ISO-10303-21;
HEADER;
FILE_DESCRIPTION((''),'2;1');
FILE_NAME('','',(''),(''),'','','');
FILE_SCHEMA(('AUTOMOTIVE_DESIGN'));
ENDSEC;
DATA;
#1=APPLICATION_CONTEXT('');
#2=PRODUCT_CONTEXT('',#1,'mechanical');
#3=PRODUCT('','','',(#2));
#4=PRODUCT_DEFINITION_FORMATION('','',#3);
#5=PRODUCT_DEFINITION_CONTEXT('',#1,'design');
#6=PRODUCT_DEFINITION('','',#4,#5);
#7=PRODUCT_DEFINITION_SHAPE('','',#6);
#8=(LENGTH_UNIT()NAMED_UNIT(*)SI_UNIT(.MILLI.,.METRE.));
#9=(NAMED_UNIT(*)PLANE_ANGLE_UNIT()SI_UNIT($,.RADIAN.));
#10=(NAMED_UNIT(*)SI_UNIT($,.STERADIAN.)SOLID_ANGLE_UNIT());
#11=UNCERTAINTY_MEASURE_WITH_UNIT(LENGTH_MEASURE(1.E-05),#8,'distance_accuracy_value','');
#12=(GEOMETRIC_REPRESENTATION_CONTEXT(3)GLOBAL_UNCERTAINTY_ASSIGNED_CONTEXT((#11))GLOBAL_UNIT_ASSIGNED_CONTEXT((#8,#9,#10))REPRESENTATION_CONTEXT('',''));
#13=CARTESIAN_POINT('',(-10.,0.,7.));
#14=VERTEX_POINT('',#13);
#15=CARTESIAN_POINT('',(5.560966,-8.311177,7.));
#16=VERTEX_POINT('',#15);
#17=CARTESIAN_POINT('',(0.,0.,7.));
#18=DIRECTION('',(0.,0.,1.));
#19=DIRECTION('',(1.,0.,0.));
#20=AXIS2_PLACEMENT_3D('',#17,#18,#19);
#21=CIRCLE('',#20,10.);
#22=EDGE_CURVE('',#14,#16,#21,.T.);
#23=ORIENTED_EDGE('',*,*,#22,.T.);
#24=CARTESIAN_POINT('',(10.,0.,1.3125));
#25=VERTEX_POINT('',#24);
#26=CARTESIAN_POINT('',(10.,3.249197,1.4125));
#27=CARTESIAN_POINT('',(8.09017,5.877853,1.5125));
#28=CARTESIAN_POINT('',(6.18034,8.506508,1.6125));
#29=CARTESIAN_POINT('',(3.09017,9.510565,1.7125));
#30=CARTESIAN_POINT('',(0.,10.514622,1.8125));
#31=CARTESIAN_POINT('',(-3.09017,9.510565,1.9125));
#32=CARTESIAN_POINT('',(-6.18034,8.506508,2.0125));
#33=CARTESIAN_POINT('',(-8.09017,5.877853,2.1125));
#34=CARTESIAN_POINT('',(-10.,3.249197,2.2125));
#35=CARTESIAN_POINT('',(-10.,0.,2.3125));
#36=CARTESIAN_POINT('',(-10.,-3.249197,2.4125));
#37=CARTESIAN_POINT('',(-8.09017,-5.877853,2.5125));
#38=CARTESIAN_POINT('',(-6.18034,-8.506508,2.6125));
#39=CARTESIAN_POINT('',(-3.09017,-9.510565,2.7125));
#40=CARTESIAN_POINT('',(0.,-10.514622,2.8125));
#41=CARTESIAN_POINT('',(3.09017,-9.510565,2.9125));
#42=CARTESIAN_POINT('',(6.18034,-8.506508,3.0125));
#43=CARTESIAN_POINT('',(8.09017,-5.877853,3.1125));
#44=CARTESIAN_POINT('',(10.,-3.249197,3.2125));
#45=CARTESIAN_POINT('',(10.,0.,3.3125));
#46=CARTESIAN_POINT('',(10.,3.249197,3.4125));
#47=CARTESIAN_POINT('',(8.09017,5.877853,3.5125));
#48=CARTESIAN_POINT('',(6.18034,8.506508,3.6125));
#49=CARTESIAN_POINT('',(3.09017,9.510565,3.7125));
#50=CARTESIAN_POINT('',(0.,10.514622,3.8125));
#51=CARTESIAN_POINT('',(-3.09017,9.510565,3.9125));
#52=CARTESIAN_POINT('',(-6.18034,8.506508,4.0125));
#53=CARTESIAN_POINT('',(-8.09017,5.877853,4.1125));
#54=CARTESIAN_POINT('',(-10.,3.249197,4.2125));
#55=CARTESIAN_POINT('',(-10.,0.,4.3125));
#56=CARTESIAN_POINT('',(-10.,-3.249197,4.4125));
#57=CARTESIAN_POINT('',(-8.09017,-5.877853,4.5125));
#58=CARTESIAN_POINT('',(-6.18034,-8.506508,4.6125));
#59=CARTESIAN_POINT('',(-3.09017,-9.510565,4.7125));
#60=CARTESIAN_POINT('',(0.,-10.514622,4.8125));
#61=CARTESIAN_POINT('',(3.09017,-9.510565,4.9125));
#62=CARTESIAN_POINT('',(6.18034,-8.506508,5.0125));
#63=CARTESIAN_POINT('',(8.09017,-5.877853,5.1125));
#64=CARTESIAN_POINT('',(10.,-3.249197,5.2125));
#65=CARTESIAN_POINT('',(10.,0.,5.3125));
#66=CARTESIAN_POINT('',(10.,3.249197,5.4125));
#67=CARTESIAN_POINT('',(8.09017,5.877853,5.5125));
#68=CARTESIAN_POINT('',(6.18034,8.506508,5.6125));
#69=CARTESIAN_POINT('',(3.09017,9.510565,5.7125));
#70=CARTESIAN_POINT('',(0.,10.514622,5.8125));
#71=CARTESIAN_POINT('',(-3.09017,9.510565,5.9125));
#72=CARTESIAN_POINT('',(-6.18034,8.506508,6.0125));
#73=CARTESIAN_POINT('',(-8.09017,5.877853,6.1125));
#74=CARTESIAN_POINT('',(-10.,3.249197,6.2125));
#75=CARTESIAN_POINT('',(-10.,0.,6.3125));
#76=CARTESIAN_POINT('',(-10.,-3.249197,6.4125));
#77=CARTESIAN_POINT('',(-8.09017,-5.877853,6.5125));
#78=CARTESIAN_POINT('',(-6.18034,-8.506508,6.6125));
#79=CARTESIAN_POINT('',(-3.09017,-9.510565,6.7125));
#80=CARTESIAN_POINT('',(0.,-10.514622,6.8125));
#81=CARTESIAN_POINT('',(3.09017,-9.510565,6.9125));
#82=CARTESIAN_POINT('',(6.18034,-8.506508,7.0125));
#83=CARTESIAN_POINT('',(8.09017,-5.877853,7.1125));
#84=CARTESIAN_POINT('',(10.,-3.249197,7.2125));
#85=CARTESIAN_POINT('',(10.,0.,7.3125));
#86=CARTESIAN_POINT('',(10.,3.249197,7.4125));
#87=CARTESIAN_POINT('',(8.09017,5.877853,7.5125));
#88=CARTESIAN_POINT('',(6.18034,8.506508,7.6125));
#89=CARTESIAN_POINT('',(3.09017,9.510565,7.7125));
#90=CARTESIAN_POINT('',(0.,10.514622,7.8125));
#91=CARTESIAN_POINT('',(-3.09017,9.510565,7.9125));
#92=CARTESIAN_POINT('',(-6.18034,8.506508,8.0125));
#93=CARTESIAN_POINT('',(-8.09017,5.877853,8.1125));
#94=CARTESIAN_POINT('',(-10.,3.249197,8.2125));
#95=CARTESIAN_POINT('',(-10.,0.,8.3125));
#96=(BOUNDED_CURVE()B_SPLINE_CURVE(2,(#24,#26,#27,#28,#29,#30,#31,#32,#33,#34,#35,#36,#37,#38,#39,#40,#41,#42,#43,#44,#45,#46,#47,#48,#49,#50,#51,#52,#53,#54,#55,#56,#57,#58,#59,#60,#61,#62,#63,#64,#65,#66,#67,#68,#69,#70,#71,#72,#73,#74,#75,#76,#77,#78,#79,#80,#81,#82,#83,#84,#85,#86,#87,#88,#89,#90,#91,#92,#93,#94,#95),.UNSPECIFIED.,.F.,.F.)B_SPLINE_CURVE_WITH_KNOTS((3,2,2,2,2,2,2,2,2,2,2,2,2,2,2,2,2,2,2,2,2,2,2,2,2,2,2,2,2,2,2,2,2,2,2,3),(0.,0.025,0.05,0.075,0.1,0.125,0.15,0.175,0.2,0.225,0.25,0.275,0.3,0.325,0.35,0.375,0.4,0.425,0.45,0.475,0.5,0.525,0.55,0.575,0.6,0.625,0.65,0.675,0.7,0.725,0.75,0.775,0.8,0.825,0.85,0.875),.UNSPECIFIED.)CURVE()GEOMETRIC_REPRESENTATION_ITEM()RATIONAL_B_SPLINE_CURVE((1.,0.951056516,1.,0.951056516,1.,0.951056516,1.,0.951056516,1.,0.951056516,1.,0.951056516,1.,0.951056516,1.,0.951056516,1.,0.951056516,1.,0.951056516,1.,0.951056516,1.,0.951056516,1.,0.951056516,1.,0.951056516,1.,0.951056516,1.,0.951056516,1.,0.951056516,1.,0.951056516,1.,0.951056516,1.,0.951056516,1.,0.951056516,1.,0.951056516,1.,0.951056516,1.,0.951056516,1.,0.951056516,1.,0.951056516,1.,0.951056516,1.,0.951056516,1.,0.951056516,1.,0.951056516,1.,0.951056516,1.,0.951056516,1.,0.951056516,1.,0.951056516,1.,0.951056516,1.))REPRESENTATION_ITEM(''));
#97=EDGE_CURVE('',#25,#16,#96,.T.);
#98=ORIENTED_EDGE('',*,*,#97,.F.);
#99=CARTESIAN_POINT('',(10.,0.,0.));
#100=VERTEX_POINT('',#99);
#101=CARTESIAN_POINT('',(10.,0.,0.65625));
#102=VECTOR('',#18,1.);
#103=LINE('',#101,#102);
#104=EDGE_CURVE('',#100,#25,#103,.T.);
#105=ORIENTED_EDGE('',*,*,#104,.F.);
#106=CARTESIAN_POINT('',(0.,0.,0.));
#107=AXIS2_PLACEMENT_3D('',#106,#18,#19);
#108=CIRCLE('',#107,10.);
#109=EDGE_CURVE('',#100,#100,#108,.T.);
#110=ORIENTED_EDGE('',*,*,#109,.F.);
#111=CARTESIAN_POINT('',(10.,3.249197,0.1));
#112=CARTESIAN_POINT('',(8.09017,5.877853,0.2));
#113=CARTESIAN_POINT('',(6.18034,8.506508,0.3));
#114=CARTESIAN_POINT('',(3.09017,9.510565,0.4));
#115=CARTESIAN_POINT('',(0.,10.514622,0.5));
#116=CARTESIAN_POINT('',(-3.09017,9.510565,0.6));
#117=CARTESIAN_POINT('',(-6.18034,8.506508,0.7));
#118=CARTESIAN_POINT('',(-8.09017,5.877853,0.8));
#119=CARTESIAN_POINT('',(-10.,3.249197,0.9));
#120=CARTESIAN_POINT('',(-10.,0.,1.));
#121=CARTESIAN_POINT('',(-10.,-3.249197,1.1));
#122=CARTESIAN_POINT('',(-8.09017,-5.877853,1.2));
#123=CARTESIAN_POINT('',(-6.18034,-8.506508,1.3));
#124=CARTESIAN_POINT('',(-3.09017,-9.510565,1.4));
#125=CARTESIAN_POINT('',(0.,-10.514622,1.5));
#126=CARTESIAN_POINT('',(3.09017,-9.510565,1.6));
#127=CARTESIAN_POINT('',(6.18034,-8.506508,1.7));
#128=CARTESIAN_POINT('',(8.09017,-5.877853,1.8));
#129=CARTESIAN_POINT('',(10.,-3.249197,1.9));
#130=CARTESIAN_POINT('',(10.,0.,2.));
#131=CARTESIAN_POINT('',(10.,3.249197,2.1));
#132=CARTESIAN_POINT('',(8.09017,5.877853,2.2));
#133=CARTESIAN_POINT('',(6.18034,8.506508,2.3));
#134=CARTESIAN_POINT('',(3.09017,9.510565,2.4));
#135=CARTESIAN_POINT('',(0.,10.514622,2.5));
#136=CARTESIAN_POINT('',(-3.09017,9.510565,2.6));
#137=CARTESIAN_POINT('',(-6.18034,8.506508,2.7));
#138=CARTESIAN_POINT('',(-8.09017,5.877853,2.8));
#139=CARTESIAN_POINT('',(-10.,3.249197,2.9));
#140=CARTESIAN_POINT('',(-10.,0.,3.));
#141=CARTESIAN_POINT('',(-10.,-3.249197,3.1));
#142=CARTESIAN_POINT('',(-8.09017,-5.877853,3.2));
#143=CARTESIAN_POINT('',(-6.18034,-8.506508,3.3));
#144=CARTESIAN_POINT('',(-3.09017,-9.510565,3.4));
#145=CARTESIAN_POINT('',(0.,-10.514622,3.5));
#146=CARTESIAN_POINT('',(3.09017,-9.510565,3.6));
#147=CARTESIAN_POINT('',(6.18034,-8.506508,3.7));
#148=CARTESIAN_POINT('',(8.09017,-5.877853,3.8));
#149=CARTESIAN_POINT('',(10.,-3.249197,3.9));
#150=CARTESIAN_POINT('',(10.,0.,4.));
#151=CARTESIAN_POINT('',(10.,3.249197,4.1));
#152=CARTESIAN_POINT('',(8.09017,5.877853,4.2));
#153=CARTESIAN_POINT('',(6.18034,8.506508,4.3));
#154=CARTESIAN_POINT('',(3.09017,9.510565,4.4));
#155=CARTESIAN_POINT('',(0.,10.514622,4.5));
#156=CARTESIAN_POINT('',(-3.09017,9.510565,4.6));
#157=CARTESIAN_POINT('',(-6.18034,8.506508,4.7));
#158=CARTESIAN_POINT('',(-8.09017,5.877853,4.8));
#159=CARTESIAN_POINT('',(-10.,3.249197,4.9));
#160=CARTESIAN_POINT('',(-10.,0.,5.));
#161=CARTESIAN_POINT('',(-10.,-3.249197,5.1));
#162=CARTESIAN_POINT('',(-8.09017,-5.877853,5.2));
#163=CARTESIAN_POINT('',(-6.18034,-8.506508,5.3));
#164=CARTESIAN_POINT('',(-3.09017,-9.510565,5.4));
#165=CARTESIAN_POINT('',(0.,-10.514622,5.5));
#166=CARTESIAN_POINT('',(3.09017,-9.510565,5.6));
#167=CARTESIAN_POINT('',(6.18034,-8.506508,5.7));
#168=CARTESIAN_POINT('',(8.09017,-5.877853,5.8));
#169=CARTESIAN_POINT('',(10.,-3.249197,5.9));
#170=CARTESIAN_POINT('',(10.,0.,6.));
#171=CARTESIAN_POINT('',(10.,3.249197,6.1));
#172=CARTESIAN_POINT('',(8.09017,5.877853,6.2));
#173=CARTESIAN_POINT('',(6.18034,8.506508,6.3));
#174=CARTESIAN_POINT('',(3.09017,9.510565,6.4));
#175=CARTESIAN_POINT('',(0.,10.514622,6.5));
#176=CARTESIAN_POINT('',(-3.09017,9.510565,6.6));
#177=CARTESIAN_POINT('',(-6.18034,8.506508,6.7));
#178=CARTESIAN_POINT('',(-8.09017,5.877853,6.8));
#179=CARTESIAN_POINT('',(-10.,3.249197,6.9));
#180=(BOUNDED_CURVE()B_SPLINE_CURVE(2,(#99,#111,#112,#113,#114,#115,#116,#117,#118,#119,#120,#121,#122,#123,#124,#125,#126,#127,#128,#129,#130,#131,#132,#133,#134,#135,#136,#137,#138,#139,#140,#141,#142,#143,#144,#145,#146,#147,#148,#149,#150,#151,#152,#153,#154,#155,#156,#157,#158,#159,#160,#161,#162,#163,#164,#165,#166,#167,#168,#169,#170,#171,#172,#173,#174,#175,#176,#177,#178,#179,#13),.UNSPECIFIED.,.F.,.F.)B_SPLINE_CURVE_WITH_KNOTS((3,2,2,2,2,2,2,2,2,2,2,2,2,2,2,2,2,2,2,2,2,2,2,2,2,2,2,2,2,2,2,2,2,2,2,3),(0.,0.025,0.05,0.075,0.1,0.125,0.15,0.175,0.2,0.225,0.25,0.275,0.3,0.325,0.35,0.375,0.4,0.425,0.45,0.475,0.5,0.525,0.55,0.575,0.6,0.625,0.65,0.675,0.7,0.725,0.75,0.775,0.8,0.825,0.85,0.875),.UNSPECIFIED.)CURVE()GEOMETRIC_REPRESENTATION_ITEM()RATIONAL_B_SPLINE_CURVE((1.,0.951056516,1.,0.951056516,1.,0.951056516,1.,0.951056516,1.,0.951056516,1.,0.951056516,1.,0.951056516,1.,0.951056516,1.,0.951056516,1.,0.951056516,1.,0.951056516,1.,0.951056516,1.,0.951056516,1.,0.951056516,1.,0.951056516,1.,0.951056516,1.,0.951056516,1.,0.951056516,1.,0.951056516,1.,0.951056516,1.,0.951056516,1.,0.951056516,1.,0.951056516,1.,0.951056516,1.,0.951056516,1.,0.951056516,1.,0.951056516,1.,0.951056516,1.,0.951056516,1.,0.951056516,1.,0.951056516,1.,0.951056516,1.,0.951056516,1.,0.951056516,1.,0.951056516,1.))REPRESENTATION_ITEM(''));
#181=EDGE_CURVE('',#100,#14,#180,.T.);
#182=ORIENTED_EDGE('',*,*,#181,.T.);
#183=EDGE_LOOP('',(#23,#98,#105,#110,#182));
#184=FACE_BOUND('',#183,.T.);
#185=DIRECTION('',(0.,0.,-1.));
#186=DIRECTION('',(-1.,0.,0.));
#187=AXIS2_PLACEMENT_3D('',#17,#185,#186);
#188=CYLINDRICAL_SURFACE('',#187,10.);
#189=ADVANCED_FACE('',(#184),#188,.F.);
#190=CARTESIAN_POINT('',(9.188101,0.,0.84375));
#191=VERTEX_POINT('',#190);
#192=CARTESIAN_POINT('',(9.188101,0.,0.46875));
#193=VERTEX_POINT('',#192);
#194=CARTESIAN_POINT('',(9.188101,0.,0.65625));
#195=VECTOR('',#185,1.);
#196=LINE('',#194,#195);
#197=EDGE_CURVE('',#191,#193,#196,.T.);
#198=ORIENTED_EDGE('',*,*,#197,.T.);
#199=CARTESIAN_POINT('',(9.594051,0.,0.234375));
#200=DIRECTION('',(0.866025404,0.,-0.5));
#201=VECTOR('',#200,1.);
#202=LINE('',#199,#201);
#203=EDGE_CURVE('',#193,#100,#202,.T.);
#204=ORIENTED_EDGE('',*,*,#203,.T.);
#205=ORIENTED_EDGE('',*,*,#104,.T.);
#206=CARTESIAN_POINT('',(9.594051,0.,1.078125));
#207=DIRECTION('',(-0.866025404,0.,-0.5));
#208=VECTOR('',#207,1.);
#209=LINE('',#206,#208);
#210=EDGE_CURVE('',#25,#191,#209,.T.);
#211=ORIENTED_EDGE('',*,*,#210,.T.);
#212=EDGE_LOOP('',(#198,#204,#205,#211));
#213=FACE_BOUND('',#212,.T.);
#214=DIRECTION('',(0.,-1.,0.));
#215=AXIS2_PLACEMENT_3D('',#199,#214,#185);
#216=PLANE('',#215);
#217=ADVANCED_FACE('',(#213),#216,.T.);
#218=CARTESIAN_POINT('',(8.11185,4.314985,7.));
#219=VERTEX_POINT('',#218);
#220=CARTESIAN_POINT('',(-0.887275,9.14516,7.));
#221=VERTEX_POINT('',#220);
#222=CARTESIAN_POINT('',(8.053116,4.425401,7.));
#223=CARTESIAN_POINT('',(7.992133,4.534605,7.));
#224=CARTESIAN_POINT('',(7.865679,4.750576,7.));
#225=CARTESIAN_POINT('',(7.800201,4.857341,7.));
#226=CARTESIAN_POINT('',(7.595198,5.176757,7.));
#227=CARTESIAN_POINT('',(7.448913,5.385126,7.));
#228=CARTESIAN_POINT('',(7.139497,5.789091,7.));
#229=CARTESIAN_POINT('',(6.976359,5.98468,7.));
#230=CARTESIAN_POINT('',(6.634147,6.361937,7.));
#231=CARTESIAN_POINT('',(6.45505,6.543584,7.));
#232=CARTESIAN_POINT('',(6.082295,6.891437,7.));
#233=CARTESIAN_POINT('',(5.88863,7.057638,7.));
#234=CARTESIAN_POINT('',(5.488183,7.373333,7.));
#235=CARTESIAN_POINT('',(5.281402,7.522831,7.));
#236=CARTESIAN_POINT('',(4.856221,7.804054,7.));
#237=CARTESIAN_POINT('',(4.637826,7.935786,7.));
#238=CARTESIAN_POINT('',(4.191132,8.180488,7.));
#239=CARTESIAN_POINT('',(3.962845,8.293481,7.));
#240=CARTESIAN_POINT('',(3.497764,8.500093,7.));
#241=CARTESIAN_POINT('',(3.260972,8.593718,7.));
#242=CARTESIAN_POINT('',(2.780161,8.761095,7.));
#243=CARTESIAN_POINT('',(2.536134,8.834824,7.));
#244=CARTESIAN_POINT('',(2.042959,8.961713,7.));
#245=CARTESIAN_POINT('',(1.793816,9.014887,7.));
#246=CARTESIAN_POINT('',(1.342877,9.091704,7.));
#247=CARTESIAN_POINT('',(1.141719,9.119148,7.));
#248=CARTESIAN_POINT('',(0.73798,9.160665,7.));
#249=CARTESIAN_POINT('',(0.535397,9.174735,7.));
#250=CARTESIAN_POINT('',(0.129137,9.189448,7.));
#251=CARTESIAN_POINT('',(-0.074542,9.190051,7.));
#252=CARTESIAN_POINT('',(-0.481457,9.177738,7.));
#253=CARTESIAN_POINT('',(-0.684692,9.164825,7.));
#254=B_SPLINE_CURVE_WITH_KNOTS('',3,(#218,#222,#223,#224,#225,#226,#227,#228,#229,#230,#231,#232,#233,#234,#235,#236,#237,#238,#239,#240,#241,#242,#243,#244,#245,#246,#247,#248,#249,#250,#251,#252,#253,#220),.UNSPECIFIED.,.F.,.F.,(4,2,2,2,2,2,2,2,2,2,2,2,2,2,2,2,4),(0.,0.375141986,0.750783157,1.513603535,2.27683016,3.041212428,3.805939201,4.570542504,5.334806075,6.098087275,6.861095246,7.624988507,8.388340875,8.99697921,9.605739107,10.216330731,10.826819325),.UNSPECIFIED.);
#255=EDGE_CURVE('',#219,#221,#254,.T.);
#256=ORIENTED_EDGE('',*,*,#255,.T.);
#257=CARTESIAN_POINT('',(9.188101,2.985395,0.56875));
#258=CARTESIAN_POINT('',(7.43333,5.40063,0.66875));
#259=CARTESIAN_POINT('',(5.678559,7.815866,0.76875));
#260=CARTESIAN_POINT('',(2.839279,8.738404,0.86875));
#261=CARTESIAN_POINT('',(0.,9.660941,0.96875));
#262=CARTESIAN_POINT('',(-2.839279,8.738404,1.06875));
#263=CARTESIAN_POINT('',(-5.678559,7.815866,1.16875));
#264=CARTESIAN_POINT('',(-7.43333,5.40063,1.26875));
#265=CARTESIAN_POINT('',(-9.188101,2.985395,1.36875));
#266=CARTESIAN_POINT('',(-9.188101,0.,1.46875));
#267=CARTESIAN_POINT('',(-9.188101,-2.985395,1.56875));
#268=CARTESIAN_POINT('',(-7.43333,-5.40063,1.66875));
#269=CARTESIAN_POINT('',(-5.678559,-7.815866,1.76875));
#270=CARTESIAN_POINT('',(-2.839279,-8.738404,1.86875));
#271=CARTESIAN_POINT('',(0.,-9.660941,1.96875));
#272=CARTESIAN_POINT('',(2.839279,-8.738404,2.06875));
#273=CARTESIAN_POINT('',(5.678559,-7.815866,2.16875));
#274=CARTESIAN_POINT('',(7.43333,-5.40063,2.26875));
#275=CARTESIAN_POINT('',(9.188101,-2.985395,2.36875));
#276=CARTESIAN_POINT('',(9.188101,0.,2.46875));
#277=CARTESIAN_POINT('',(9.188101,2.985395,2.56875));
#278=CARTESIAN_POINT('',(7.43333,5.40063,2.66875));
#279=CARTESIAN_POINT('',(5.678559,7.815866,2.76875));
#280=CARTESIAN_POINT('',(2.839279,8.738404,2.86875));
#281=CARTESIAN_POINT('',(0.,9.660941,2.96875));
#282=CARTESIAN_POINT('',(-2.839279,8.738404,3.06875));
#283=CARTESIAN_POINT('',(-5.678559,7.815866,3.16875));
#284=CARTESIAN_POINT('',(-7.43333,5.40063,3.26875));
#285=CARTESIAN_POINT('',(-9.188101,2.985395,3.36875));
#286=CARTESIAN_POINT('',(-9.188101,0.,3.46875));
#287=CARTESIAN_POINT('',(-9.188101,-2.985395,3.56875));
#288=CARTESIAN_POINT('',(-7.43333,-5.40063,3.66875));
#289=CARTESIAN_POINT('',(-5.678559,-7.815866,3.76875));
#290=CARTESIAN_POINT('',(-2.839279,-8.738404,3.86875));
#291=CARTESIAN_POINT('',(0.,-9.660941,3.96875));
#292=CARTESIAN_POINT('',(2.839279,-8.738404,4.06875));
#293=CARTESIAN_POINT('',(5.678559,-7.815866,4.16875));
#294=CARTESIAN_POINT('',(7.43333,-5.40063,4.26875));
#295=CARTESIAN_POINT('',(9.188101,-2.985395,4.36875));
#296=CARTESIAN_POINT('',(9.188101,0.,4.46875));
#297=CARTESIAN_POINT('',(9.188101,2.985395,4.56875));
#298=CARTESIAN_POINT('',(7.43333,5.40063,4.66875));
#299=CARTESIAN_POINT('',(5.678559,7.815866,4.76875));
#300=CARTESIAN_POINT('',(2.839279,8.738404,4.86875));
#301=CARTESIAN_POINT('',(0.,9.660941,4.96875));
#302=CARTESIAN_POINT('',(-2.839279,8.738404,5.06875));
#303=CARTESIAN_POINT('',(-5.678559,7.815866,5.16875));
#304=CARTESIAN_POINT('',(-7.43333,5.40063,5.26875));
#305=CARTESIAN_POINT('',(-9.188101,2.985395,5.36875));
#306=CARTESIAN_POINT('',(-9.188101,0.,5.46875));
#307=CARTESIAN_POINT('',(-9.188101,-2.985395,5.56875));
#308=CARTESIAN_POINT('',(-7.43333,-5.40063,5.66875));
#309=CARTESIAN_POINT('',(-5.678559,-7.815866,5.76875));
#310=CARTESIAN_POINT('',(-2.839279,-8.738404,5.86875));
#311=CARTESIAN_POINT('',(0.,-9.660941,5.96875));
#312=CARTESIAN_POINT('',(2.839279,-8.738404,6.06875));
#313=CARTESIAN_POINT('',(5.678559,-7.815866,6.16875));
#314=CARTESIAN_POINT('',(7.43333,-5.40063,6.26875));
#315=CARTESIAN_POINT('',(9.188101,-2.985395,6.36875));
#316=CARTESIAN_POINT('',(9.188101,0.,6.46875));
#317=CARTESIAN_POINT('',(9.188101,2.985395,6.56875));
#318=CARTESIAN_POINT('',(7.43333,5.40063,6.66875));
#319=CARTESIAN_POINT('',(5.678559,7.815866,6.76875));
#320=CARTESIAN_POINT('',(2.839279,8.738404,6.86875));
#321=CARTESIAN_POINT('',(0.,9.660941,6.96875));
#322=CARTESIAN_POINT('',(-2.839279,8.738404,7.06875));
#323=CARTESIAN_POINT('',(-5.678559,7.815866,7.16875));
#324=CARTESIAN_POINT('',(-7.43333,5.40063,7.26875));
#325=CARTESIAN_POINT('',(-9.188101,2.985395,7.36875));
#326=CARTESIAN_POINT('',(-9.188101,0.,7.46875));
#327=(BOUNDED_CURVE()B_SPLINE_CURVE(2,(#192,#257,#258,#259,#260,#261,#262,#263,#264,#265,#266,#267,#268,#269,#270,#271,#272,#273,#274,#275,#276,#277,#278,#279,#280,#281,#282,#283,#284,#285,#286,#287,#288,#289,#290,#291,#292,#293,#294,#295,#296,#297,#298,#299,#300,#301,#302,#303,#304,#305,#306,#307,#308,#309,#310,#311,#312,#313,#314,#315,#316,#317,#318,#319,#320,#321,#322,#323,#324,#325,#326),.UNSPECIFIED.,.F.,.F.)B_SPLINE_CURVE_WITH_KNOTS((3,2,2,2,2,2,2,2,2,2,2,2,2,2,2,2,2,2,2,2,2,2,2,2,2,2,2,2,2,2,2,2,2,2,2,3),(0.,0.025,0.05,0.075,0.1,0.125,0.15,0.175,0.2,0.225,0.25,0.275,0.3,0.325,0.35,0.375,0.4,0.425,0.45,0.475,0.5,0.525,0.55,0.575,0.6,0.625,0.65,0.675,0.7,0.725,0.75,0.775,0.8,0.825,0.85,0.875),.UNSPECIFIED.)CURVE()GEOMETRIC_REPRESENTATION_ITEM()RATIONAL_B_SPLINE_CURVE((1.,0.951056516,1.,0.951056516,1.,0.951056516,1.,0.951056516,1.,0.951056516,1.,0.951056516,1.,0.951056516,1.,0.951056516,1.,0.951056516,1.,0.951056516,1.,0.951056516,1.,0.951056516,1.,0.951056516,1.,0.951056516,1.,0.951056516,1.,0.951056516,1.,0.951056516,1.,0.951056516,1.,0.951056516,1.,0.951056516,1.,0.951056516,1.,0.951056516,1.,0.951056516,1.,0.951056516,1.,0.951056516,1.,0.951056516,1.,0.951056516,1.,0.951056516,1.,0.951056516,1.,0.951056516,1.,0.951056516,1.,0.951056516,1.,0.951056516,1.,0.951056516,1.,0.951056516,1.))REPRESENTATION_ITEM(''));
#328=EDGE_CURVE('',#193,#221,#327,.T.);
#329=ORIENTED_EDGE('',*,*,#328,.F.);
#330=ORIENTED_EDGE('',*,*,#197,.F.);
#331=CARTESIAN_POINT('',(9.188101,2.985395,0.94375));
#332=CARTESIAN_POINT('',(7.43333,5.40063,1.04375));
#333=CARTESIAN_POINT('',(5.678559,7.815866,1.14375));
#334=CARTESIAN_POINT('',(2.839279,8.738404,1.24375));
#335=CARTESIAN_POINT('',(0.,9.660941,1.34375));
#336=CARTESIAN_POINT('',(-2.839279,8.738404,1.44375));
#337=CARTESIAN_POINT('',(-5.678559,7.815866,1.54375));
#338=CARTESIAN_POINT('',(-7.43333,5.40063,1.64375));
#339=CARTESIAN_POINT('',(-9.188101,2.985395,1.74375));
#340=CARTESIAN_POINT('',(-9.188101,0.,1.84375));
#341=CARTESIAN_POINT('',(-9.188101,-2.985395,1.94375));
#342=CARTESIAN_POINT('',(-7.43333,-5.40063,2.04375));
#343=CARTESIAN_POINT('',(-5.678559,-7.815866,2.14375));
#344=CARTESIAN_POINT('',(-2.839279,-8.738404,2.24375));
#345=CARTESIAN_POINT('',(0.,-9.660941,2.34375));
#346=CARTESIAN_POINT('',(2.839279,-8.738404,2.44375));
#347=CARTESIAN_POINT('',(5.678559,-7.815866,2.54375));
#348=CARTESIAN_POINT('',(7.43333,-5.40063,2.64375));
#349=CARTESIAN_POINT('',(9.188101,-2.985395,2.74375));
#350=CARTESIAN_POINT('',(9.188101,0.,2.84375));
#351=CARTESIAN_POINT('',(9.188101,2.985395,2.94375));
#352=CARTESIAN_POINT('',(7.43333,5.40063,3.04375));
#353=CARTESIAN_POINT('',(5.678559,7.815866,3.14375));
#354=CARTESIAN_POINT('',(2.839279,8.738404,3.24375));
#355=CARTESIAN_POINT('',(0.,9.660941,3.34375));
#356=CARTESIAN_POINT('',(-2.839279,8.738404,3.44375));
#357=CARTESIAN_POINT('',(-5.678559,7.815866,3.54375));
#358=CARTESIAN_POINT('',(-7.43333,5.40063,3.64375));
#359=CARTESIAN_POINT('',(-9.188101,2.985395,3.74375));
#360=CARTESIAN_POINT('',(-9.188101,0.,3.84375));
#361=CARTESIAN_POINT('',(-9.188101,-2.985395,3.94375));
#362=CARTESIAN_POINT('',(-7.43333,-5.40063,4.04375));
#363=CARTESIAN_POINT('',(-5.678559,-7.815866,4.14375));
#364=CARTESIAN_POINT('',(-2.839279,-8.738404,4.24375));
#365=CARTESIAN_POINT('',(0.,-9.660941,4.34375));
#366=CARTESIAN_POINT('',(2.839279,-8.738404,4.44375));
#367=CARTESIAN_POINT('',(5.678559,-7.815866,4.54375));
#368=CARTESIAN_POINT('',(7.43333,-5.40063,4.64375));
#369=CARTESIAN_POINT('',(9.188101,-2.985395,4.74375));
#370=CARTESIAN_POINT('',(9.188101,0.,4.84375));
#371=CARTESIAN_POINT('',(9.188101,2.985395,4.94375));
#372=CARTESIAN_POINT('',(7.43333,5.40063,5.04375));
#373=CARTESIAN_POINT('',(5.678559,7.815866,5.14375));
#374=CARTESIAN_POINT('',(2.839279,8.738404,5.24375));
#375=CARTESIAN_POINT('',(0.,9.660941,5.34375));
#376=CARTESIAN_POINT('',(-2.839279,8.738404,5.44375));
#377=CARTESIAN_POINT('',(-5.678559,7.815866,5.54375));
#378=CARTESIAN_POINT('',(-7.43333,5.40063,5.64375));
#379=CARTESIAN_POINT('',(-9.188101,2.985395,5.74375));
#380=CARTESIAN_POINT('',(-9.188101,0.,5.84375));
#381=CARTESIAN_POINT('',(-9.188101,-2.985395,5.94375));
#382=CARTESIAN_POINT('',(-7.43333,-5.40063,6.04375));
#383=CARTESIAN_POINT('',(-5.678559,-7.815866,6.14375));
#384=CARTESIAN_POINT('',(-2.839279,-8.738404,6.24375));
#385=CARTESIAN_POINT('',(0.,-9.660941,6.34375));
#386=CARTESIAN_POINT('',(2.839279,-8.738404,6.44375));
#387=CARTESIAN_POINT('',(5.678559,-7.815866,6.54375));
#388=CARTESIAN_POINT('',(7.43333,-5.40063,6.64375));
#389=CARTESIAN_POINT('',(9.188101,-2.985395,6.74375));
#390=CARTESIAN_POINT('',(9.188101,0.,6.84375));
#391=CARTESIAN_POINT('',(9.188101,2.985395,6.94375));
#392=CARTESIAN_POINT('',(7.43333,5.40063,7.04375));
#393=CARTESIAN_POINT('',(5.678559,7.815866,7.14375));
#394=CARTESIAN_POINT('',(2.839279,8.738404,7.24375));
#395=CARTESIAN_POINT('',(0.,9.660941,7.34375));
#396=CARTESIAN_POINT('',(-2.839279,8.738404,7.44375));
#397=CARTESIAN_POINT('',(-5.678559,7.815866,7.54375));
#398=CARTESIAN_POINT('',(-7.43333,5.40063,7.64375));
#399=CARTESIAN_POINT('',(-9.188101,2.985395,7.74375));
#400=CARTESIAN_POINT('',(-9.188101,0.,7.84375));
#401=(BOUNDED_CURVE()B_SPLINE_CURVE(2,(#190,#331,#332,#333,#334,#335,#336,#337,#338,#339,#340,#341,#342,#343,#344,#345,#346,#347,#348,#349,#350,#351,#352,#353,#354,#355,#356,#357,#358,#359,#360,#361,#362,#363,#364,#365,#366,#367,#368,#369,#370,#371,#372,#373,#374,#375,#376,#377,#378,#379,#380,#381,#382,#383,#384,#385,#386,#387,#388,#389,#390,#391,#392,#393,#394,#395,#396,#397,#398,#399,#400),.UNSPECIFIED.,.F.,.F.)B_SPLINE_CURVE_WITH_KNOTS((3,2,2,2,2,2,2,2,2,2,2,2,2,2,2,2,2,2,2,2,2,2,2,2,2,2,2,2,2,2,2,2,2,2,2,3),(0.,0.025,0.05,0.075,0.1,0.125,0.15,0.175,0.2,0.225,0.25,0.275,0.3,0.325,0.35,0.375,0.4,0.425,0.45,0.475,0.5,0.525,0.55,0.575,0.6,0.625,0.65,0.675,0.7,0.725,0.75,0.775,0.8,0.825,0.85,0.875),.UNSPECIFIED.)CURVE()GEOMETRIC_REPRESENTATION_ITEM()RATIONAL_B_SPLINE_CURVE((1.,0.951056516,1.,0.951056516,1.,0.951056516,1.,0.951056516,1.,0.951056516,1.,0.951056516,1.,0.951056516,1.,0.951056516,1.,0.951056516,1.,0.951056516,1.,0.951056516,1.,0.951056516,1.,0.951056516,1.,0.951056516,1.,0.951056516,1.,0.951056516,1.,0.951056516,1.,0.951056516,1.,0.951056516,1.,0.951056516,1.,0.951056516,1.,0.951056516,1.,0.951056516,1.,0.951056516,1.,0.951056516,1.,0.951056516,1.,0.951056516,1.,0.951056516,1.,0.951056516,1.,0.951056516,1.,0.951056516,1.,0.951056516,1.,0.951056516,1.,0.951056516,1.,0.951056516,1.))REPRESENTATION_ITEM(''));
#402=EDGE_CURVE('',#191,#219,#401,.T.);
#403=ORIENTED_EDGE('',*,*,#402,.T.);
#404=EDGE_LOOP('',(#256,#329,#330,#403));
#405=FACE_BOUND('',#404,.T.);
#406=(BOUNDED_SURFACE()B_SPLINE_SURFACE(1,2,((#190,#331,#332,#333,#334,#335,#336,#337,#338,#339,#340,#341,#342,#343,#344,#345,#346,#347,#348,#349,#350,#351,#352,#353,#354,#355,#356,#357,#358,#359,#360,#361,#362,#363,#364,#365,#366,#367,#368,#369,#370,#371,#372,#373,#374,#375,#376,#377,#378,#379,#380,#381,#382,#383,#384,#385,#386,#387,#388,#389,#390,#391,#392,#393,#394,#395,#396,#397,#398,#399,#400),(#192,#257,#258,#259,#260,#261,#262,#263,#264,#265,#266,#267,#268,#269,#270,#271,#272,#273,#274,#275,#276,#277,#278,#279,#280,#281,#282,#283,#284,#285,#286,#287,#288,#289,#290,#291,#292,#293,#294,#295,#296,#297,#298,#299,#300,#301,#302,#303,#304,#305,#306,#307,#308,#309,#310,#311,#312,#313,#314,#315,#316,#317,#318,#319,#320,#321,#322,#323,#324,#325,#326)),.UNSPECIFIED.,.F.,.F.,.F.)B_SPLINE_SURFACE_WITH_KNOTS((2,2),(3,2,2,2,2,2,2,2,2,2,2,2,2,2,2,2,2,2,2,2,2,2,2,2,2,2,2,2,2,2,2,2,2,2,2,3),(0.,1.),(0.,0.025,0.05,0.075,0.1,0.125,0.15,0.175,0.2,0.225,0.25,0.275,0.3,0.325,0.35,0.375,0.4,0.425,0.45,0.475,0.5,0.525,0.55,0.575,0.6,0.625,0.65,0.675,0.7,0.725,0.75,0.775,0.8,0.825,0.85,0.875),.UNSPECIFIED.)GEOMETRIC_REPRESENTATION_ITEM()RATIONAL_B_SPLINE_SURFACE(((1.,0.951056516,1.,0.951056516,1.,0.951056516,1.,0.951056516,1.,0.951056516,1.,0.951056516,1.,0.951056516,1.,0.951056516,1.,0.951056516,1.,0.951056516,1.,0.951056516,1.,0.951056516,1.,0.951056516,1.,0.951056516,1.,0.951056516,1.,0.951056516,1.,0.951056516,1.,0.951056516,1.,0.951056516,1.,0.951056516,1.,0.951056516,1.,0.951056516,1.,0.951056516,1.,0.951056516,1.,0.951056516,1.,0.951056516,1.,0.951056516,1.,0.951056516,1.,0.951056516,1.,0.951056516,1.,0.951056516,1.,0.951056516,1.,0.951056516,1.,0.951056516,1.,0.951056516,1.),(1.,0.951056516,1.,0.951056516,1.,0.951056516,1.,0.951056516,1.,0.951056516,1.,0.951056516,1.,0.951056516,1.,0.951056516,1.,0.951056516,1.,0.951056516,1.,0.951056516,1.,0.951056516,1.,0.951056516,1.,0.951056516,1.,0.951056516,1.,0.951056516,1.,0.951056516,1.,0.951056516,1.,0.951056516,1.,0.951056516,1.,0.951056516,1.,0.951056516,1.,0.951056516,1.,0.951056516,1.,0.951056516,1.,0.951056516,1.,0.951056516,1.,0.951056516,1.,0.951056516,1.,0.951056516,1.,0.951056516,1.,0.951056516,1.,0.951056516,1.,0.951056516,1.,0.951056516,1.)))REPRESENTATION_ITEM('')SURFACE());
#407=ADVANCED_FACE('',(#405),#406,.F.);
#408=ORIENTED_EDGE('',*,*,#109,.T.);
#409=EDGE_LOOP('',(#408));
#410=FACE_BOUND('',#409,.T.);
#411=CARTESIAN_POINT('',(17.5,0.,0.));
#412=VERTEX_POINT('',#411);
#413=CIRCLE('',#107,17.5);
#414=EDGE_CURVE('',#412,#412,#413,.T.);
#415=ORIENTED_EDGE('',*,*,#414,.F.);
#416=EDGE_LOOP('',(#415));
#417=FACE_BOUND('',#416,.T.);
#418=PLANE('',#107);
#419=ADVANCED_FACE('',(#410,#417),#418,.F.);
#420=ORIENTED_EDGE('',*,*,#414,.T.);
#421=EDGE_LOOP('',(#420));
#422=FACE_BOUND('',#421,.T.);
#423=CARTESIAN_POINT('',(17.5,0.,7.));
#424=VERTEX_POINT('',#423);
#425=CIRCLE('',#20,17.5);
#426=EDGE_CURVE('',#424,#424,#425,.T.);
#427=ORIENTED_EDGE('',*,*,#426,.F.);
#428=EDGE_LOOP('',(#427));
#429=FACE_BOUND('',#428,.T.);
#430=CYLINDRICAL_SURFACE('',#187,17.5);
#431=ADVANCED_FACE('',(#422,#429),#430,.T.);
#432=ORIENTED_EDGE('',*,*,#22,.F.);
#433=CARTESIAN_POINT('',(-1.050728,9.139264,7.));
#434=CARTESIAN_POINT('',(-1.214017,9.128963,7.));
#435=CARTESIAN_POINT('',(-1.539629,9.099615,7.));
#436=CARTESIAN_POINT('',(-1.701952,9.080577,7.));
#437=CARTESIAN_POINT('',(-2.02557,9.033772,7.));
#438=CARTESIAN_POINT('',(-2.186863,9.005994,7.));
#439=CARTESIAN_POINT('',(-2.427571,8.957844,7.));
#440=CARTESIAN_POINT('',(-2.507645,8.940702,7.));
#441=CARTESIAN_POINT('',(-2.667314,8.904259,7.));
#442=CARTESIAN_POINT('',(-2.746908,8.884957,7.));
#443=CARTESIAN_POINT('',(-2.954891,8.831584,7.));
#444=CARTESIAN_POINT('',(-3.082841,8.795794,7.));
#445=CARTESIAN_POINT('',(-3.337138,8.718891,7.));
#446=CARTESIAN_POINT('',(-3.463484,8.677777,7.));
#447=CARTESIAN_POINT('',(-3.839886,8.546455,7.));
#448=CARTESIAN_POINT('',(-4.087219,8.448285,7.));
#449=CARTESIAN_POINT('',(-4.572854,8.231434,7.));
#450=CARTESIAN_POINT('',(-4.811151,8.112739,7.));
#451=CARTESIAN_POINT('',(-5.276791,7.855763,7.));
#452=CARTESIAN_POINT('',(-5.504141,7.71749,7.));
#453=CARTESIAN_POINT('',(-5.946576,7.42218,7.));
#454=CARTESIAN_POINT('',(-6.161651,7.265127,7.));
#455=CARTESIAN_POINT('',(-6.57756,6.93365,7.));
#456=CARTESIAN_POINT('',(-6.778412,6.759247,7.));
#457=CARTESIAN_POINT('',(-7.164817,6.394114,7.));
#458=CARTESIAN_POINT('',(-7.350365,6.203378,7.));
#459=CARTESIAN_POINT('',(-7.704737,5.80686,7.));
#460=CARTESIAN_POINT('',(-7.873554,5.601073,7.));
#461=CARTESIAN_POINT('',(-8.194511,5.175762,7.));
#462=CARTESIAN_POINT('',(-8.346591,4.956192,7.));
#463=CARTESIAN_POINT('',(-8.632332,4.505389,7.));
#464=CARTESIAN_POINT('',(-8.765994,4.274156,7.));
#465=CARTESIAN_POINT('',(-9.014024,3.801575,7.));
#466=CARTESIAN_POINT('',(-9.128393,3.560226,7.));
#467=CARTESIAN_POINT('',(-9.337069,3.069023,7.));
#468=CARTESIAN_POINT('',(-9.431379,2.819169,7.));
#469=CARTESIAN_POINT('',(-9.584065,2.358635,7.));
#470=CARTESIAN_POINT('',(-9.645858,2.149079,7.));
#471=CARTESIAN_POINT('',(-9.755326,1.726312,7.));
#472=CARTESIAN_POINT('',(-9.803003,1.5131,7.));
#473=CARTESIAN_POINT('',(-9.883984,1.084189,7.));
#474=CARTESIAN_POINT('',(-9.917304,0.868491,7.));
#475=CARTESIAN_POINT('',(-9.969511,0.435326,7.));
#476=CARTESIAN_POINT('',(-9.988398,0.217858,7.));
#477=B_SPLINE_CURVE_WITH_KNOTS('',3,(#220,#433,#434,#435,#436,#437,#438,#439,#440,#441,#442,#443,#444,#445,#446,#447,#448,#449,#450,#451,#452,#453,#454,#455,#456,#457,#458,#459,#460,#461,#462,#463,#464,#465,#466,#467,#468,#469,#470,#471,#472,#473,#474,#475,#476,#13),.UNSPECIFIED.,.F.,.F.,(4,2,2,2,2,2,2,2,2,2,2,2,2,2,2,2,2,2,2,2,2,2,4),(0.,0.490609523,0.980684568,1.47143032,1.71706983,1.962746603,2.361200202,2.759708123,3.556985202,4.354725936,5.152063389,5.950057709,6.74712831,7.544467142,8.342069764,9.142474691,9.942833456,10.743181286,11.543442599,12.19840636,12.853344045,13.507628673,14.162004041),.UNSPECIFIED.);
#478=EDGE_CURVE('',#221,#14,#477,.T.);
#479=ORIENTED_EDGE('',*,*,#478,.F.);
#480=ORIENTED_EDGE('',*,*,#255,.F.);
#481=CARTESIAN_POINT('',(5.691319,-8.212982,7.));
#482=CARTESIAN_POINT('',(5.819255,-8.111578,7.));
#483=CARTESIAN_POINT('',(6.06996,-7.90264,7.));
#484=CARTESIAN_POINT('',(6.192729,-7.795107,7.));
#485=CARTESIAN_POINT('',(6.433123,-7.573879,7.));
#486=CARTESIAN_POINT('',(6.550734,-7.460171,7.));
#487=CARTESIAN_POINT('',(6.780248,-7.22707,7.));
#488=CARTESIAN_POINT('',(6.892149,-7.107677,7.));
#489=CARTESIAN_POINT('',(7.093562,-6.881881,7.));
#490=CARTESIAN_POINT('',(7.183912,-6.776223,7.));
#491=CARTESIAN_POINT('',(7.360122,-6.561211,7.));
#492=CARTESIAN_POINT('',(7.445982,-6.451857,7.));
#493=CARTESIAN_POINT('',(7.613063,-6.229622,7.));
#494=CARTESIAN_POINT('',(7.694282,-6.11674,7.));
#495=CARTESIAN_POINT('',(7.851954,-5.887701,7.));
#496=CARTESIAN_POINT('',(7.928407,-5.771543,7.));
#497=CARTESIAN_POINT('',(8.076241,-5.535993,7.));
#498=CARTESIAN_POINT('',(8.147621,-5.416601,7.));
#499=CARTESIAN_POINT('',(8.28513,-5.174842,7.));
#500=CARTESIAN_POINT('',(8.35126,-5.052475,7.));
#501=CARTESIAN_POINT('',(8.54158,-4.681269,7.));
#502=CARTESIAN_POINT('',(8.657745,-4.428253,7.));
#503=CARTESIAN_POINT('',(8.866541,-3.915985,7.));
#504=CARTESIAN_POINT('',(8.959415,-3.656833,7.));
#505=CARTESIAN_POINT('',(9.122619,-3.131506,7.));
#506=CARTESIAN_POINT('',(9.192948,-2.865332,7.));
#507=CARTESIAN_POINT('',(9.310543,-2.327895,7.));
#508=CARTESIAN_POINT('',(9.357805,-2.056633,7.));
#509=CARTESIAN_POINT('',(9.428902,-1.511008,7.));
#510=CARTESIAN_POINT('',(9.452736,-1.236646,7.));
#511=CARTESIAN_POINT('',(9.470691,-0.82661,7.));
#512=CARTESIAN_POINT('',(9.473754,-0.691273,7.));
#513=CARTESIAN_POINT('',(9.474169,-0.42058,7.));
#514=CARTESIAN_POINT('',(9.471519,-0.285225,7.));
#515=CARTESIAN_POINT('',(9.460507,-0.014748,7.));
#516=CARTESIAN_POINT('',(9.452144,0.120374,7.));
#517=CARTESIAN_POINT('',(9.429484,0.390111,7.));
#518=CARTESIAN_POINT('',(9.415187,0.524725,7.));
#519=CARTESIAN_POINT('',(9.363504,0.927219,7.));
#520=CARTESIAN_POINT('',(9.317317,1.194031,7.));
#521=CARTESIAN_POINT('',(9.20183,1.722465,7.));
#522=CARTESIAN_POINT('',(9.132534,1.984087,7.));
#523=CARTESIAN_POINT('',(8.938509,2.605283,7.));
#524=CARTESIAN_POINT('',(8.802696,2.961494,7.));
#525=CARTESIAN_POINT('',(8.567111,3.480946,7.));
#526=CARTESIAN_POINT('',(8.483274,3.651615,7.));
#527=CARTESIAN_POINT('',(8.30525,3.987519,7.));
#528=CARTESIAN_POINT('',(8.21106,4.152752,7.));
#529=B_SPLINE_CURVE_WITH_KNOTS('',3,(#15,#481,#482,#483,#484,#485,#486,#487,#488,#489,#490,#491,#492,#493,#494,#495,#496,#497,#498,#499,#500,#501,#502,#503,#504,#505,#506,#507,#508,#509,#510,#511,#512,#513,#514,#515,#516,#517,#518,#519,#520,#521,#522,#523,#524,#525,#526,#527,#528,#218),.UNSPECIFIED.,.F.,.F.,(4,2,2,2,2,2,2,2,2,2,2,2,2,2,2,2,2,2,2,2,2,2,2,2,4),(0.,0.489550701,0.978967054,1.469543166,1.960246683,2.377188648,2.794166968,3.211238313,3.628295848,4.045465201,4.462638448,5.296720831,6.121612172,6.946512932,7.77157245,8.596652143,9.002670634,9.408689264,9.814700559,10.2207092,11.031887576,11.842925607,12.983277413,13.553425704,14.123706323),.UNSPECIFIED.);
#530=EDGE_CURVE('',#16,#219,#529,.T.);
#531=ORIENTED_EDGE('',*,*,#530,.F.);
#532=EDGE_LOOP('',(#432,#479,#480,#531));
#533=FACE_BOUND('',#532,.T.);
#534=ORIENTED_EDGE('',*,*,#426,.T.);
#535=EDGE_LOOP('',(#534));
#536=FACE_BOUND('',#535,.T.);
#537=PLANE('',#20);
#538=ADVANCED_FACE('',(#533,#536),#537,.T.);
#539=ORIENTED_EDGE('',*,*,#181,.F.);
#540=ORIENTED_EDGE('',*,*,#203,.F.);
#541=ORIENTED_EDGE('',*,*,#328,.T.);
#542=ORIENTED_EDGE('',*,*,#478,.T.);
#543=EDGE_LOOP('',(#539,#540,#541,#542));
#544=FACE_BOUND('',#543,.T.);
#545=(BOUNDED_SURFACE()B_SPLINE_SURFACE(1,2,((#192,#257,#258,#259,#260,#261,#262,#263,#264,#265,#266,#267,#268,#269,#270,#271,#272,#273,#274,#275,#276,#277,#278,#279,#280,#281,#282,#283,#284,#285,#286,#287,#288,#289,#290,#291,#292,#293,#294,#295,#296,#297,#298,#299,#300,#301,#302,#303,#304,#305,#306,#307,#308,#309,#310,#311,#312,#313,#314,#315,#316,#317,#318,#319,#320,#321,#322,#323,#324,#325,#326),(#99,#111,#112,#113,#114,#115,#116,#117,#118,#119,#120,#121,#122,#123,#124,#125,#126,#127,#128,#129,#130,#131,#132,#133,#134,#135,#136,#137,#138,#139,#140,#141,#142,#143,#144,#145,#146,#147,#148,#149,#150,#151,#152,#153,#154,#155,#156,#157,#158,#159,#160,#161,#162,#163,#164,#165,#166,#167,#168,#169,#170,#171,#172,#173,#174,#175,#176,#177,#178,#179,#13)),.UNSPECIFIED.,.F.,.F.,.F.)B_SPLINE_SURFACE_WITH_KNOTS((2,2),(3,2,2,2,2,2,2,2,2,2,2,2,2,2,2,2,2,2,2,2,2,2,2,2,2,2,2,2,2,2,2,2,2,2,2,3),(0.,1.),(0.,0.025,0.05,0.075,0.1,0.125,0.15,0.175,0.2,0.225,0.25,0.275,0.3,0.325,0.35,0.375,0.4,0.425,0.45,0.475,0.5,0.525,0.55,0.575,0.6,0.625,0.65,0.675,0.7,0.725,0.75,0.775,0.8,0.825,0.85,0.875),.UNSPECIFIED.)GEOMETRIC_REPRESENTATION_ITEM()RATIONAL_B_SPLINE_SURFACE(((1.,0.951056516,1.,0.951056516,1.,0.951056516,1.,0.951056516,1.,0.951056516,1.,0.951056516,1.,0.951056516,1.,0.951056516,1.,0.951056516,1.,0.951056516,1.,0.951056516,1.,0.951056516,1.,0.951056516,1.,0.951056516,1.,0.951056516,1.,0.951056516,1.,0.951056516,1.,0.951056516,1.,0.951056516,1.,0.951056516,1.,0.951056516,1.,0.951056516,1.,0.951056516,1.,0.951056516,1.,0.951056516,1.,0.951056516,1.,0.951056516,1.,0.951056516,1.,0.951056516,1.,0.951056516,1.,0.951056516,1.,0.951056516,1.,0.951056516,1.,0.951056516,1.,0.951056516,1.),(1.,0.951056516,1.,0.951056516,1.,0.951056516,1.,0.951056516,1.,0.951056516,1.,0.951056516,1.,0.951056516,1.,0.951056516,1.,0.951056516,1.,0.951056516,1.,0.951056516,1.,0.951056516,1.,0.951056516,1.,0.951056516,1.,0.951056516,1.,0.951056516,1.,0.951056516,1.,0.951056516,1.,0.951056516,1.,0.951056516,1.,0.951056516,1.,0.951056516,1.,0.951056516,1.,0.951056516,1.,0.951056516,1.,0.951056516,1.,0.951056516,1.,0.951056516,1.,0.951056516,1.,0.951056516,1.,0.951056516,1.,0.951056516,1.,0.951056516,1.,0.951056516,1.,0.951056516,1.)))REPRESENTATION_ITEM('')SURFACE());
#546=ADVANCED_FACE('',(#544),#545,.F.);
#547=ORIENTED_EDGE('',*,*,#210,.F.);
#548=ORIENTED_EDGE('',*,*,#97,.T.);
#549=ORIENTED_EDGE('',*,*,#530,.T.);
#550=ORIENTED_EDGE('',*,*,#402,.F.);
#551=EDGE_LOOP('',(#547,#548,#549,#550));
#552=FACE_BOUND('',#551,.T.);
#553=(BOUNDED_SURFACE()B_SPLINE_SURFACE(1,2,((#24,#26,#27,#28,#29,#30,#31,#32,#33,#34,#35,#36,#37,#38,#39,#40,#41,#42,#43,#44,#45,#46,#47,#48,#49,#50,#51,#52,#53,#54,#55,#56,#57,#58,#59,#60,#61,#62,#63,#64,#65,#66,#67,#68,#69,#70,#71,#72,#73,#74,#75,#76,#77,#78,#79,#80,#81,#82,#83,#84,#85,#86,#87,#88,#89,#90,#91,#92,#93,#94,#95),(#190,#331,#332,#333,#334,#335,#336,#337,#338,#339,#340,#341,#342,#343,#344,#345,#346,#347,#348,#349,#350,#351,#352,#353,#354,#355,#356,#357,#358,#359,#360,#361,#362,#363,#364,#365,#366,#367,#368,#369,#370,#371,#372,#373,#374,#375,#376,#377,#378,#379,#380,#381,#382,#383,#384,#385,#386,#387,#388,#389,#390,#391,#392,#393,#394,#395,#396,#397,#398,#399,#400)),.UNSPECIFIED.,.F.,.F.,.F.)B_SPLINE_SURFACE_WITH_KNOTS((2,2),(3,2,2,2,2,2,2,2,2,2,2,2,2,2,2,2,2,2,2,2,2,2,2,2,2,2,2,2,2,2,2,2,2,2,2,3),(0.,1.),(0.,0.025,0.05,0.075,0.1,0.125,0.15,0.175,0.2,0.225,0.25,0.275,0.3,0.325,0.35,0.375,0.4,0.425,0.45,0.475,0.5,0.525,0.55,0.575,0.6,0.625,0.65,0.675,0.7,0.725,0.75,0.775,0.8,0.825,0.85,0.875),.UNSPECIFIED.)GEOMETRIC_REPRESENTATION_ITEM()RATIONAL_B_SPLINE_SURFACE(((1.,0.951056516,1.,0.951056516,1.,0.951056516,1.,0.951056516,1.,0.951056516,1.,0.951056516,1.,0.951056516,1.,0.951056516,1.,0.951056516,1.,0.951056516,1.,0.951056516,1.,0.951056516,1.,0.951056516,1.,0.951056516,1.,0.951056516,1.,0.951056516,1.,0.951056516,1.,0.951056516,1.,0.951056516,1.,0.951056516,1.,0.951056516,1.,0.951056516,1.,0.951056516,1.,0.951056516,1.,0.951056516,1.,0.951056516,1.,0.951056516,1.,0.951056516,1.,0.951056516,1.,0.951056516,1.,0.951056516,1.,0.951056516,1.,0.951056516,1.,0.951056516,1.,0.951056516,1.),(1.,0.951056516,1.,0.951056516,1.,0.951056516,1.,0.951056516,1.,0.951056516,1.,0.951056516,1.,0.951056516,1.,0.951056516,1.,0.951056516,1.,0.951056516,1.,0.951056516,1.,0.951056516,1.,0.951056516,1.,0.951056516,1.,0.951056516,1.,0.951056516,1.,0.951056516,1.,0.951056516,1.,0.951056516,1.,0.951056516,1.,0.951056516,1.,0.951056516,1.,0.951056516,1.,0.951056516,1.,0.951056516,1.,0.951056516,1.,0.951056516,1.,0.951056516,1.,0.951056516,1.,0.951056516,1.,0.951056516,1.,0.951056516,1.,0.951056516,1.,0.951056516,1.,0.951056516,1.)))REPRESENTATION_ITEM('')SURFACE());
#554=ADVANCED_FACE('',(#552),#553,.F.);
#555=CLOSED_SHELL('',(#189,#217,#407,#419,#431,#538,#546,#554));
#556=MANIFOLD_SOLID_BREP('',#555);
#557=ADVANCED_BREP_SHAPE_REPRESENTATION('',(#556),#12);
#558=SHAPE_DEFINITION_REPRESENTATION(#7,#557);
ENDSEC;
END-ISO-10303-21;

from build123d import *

# Parameters (mm, degrees)
SKETCH1_R           = 17.5
SKETCH1_R_2         = 10
BOSS_EXTRUDE1_DEPTH = 7
THREAD1_PITCH       = 2
SKETCH4_W           = 35
SKETCH4_H           = 2.231433202
CUT_EXTRUDE1_DEPTH  = 28.5


with BuildPart() as part:
    # Sketch1 → Boss-Extrude1 (new body)
    with BuildSketch(Plane.XY):
        Circle(SKETCH1_R)
        Circle(SKETCH1_R_2, mode=Mode.SUBTRACT)
    extrude(amount=BOSS_EXTRUDE1_DEPTH)

    # Thread1: the profile of Thread Profile1 profile screwed along a right-hand helix of 3.5 turns, 10 arcs to a turn; built about Z, then put on its axis
    thread1_z = Axis((0, 0, 0), (0, 0, 1))
    thread1_corners = [(10.0003, 0, -0.000173205), (10.0003, 0, 1.312673201), (9.188101187, 0, 0.843749998), (9.188101187, 0, 0.468749998)]
    with BuildLine(mode=Mode.PRIVATE) as thread1_profile:
        Line(thread1_corners[0], thread1_corners[1])
        Line(thread1_corners[1], thread1_corners[2])
        Line(thread1_corners[2], thread1_corners[3])
        Line(thread1_corners[3], thread1_corners[0])
    thread1_cap = Face(thread1_profile.wire())
    thread1_turn_angles = [0, 18, 36, 54, 72, 90, 108, 126, 144, 162, 180, 198, 216, 234, 252, 270, 288, 306, 324, 342, 360]
    thread1_turn_weights = [1, 0.9510565162951535, 1, 0.9510565162951535, 1, 0.9510565162951535, 1, 0.9510565162951535, 1, 0.9510565162951535, 1, 0.9510565162951535, 1, 0.9510565162951535, 1, 0.9510565162951535, 1, 0.9510565162951535, 1, 0.9510565162951535, 1]
    thread1_turn_rails = [Edge.make_bspline([Vector(p[0], p[1], 0).rotate(thread1_z, thread1_turn_angles[k]) / thread1_turn_weights[k] + Vector(0, 0, p[2] + THREAD1_PITCH * thread1_turn_angles[k] / 360) for k in range(21)], [0, 0, 0, 1, 1, 2, 2, 3, 3, 4, 4, 5, 5, 6, 6, 7, 7, 8, 8, 9, 9, 10, 10, 10], 2, thread1_turn_weights) for p in thread1_corners]
    thread1_turn_sides = [Face.make_surface_from_curves(thread1_turn_rails[p[0]], thread1_turn_rails[p[1]]) for p in [(0, 1), (1, 2), (2, 3), (3, 0)]]
    thread1_last_angles = [1080, 1098, 1116, 1134, 1152, 1170, 1188, 1206, 1224, 1242, 1260]
    thread1_last_weights = [1, 0.9510565162951535, 1, 0.9510565162951535, 1, 0.9510565162951535, 1, 0.9510565162951535, 1, 0.9510565162951535, 1]
    thread1_last_rails = [Edge.make_bspline([Vector(p[0], p[1], 0).rotate(thread1_z, thread1_last_angles[k]) / thread1_last_weights[k] + Vector(0, 0, p[2] + THREAD1_PITCH * thread1_last_angles[k] / 360) for k in range(11)], [0, 0, 0, 1, 1, 2, 2, 3, 3, 4, 4, 5, 5, 5], 2, thread1_last_weights) for p in thread1_corners]
    thread1_last_sides = [Face.make_surface_from_curves(thread1_last_rails[p[0]], thread1_last_rails[p[1]]) for p in [(0, 1), (1, 2), (2, 3), (3, 0)]]
    thread1 = Plane(origin=(0, 0, 0), x_dir=(1, 0, 0), z_dir=(0, 0, 1)) * Solid(Shell([*[p.moved(Location((0, 0, THREAD1_PITCH * i))) for i in range(3) for p in thread1_turn_sides], *thread1_last_sides, thread1_cap, thread1_cap.rotate(thread1_z, 1260).moved(Location((0, 0, THREAD1_PITCH * 1260 / 360)))]))
    add(thread1)

    # Sketch4 → Cut-Extrude1 (cut, symmetric)
    with BuildSketch(Plane(origin=(0, 0, 0), x_dir=(1, 0, 0), z_dir=(0, 1, 0))):
        with Locations((0, -8.115716601)):
            Rectangle(SKETCH4_W, SKETCH4_H)
    extrude(amount=CUT_EXTRUDE1_DEPTH, both=True, mode=Mode.SUBTRACT)


solid = part.part
